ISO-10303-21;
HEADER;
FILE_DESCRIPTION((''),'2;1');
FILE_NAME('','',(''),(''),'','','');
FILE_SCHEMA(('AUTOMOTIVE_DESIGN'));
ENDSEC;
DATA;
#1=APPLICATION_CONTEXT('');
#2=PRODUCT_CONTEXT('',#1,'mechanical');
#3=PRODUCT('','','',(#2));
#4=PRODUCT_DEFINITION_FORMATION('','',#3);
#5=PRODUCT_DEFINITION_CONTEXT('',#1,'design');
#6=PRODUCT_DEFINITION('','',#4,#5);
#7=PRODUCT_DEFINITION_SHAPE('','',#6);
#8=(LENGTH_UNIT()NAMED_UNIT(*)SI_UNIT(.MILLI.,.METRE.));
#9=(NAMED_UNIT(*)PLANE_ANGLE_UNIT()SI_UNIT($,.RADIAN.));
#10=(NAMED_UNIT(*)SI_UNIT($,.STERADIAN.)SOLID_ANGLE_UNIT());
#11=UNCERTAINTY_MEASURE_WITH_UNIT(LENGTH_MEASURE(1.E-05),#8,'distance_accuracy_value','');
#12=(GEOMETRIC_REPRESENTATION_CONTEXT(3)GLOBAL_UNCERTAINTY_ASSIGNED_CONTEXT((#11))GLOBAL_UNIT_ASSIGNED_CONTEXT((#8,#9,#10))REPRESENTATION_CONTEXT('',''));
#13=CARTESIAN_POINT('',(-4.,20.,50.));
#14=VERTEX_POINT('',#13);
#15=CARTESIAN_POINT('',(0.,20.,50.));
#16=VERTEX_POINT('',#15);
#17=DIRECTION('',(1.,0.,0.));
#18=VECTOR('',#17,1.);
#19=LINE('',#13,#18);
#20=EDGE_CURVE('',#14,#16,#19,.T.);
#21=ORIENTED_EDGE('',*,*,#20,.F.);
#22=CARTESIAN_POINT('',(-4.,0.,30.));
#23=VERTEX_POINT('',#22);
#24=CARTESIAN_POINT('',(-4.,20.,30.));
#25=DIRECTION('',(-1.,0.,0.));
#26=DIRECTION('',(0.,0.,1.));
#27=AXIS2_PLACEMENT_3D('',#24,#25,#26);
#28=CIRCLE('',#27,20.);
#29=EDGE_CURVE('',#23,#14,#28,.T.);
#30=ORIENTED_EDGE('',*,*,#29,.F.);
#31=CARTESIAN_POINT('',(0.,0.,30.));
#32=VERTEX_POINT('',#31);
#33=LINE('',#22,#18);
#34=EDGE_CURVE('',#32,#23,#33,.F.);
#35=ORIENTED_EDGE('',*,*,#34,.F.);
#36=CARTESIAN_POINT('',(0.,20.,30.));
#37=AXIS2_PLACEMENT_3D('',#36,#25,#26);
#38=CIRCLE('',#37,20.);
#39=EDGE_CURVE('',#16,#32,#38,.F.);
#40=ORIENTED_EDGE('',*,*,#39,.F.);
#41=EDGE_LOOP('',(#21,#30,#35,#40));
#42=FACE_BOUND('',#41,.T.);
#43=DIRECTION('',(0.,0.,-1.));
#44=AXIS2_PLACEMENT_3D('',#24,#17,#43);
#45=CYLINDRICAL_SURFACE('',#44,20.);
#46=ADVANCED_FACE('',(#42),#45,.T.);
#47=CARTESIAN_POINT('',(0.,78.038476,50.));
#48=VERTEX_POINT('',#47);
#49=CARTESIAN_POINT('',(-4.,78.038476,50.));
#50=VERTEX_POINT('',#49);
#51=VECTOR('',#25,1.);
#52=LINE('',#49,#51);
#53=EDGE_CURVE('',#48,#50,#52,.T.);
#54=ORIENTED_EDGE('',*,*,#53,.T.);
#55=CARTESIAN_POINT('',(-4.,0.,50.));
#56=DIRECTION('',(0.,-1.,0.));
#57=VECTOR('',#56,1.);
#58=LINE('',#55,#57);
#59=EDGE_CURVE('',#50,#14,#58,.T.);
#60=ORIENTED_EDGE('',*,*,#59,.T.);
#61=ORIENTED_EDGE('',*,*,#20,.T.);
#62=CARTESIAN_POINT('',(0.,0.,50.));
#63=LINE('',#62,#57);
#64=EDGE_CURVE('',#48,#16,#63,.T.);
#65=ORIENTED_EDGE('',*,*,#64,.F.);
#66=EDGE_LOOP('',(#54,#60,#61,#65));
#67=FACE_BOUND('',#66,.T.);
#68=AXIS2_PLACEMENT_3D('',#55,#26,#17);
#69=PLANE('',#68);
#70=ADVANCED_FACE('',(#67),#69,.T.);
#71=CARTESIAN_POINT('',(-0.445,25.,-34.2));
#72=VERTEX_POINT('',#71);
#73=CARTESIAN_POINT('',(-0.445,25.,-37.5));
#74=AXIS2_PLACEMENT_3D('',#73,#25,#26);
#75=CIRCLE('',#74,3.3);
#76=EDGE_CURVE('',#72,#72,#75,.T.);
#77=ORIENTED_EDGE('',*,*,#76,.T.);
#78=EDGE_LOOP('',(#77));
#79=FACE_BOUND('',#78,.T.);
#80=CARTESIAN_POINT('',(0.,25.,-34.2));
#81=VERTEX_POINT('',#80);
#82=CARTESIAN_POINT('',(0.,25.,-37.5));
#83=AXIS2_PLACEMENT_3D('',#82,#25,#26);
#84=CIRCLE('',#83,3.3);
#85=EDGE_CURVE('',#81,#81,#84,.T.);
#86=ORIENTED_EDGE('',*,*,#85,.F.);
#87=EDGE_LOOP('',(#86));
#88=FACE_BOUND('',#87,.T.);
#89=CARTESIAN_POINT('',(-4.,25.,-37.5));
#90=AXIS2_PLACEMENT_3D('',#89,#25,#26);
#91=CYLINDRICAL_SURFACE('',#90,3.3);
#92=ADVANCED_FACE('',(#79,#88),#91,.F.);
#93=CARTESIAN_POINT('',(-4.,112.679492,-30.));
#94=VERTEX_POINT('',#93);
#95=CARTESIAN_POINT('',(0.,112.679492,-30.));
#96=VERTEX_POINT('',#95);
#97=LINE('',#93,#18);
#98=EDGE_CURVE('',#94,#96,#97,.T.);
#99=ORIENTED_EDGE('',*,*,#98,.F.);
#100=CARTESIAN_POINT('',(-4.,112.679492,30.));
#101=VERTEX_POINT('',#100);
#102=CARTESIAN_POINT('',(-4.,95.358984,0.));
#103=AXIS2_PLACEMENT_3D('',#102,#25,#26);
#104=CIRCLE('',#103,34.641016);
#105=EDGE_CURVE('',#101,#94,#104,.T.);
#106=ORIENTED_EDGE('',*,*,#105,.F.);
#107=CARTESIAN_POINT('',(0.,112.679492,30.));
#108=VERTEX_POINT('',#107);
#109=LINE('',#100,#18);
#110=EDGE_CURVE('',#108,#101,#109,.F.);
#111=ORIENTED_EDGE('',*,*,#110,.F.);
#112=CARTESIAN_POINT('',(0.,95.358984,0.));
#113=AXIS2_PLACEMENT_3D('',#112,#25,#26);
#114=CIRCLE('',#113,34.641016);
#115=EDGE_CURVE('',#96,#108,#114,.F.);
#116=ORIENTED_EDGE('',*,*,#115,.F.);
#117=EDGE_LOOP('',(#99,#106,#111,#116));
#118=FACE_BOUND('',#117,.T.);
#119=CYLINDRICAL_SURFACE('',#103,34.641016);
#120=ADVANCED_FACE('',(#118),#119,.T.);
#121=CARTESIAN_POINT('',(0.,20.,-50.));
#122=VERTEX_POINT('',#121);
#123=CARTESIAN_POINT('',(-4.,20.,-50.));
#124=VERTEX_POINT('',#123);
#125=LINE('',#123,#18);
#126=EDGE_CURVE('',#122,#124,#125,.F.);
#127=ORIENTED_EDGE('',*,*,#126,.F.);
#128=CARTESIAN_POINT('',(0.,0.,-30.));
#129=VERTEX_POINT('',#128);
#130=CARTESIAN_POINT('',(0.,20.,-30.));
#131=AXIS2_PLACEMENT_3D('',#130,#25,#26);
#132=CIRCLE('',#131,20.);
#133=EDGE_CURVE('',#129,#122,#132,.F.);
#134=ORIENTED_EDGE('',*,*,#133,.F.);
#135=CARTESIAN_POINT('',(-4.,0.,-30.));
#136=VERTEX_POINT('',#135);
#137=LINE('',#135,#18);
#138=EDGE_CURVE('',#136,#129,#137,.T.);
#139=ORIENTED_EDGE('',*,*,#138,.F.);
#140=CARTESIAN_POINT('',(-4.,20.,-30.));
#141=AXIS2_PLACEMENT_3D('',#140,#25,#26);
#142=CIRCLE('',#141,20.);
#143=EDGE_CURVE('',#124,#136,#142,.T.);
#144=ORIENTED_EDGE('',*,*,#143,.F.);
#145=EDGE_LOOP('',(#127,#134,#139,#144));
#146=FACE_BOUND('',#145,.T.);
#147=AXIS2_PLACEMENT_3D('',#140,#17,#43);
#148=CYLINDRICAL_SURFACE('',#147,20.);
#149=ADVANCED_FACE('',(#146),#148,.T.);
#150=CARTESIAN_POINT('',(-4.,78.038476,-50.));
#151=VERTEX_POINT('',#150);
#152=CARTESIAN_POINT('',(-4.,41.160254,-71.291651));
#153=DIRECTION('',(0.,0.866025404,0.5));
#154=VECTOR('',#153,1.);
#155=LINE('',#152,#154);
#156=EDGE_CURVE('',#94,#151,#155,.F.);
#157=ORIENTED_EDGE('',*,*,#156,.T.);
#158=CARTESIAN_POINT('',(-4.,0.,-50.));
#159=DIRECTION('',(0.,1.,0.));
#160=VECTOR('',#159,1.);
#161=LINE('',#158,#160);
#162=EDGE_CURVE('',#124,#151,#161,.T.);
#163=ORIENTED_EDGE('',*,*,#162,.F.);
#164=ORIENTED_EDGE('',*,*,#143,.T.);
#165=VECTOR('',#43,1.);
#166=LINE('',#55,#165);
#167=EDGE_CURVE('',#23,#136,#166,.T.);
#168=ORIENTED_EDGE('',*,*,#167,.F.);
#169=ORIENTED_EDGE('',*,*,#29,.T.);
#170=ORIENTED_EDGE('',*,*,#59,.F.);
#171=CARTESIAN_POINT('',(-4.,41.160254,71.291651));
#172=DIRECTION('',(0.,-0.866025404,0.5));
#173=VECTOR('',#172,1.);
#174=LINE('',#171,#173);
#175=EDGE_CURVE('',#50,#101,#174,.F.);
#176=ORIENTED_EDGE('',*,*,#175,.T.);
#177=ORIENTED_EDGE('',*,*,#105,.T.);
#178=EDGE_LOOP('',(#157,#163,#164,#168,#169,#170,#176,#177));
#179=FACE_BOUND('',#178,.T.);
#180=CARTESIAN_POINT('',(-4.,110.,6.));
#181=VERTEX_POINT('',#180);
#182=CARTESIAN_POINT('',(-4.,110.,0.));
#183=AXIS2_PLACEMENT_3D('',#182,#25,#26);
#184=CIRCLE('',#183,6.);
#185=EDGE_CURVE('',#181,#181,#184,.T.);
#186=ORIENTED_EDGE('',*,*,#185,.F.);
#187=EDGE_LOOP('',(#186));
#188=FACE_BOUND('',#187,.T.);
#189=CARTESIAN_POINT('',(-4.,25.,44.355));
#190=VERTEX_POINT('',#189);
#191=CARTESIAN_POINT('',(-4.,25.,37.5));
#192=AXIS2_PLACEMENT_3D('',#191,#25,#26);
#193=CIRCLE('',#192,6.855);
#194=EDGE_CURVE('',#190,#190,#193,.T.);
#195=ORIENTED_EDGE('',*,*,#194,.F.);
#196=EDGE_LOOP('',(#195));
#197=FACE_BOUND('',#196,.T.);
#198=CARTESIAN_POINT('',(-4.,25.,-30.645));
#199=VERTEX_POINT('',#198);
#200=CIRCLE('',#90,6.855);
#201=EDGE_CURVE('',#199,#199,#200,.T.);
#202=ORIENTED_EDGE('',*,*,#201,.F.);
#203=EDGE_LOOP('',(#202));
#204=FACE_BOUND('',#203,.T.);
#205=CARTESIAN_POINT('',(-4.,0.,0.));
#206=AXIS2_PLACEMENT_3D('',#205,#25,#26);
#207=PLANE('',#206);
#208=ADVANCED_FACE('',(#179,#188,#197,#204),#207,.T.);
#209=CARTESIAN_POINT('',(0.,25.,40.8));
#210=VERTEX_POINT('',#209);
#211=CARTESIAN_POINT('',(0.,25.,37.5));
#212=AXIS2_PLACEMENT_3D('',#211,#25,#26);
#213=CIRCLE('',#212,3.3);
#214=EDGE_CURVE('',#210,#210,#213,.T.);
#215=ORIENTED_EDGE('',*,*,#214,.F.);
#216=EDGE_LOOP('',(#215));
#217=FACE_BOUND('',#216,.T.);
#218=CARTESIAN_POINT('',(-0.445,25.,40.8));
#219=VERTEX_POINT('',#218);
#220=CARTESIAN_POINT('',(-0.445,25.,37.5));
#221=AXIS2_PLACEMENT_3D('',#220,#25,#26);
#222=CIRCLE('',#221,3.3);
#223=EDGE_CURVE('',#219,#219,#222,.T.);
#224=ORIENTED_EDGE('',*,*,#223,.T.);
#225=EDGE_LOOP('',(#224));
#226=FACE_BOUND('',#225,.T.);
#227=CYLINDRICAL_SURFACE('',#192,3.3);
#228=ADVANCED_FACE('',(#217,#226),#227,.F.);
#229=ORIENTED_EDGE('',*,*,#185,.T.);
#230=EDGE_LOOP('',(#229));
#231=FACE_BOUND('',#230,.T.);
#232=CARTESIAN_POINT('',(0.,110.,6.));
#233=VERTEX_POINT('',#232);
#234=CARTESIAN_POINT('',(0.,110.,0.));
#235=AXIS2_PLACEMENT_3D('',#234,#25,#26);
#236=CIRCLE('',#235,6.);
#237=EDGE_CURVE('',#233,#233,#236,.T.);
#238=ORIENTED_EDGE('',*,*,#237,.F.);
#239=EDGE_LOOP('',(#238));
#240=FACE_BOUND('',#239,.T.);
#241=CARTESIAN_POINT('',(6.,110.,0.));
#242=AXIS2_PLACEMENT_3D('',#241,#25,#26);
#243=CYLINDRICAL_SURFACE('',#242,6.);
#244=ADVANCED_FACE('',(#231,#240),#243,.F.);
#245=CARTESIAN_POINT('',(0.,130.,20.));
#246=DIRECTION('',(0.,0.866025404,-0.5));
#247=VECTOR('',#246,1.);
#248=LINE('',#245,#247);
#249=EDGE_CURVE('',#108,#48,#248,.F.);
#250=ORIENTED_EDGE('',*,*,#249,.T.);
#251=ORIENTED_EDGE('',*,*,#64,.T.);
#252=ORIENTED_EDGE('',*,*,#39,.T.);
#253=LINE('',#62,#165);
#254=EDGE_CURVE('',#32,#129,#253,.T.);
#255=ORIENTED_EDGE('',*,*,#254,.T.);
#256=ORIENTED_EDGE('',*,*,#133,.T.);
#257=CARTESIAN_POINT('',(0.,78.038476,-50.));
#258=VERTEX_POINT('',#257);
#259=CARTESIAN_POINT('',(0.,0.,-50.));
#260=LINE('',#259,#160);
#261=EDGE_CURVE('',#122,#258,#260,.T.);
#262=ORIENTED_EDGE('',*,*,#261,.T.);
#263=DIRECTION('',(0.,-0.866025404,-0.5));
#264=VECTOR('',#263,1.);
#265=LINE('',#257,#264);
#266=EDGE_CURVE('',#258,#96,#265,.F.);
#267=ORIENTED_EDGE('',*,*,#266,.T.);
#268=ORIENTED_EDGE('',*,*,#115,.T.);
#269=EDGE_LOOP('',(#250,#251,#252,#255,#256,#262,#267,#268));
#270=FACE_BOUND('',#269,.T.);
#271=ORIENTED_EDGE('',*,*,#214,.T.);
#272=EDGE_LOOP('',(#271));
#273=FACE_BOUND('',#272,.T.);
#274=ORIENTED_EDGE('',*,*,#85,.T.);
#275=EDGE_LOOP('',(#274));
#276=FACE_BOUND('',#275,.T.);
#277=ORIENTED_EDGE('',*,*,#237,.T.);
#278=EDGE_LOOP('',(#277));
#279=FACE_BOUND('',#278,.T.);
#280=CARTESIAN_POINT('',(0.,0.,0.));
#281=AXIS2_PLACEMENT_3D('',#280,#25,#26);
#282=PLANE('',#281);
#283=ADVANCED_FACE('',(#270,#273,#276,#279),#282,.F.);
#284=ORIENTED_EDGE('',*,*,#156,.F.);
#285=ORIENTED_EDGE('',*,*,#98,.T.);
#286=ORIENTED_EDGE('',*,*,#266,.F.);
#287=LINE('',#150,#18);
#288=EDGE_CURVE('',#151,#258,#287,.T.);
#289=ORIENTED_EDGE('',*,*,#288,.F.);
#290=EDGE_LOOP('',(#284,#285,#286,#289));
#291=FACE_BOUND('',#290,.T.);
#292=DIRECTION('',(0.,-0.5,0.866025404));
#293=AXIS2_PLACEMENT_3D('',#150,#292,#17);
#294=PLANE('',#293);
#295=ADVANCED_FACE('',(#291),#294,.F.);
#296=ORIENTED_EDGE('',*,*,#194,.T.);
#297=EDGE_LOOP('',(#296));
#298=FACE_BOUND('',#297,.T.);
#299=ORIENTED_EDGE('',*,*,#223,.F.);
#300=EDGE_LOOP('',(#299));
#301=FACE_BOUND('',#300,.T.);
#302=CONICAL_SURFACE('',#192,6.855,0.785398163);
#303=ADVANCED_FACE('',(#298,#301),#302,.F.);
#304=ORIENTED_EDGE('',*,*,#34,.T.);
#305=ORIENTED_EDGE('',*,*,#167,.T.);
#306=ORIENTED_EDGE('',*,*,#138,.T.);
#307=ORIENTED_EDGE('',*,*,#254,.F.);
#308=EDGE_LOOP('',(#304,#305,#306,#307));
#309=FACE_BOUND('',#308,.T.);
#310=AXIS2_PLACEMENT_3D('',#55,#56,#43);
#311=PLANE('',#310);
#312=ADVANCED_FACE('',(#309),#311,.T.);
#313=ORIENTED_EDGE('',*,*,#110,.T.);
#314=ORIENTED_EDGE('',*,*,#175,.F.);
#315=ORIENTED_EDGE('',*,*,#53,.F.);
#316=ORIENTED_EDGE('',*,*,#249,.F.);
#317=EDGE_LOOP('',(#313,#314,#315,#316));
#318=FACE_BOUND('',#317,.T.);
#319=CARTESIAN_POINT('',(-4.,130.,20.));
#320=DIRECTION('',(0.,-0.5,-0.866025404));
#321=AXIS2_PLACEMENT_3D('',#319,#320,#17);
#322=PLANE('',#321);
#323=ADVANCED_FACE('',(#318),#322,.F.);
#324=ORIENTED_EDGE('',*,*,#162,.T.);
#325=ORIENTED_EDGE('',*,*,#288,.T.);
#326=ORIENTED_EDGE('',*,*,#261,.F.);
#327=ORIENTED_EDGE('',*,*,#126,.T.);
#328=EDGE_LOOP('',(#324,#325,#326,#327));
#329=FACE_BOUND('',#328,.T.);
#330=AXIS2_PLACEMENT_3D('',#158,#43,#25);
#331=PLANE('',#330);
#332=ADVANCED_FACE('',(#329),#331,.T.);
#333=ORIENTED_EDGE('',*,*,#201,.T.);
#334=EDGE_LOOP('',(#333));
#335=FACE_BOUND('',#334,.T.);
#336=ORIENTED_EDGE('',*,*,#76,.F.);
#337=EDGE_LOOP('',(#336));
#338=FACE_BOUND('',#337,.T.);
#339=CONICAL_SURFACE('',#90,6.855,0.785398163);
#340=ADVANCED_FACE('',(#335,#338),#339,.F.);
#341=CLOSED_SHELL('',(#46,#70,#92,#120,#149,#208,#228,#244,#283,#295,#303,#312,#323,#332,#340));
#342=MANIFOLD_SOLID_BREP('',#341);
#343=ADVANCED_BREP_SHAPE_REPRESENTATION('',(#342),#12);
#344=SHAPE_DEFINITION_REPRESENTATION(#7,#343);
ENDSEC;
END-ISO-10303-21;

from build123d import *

# Parameters (mm, degrees)
SKETCH_10_W                = 100
SKETCH_10_H                = 130
SM_BASE_FLANGE_1_DEPTH     = 4
SKETCH_13_R                = 6
CUT_EXTRUDE_1_DEPTH        = 10
HOLE_WIZARD_M61_AT_2_COUNT = 2
HOLE_WIZARD_M61_AT_2_PITCH = 75
CHAMFER_1_SIZE             = 30
CHAMFER_1_SIZE2            = 51.961524227
FILLET_1_R                 = 34.641016
FILLET_2_R                 = 20


# Sheet-metal steps are written as plain solids
with BuildPart() as part:
    # Эскиз10 → Базовая кромка1 (new body)
    with BuildSketch(Plane(origin=(0, 0, 0), x_dir=(0, 0, -1), z_dir=(1, 0, 0))):
        with Locations((0, 65)):
            Rectangle(SKETCH_10_W, SKETCH_10_H)
    extrude(amount=-SM_BASE_FLANGE_1_DEPTH)

    # Эскиз13 → Вырез-Вытянуть1 (cut)
    with BuildSketch(Plane.ZY.offset(4)):
        with Locations((0, 110)):
            Circle(SKETCH_13_R)
    extrude(amount=-CUT_EXTRUDE_1_DEPTH, mode=Mode.SUBTRACT)

    # Эскиз16 → Зенковка для винта с потайной головкой и внутренним шестигранником M61 (revolve, cut)
    with BuildSketch(Plane(origin=(-4, 25, -37.5), x_dir=(0, 0, 1), z_dir=(0, 1, 0))):
        Polygon((0, 0), (0, 4), (3.3, 4), (3.3, 3.555), (6.855, 0), align=None)
    hole_wizard_m61 = revolve(axis=Axis((-10.35, 25, -37.5), (1, 0, 0)), mode=Mode.SUBTRACT)

    # Зенковка для винта с потайной головкой и внутренним шестигранником M61 at 2: Зенковка для винта с потайной головкой и внутренним шестигранником M61 ×2
    with Locations(*[(0, 0, i * HOLE_WIZARD_M61_AT_2_PITCH) for i in range(1, HOLE_WIZARD_M61_AT_2_COUNT)]):
        add(hole_wizard_m61, mode=Mode.SUBTRACT)

    # Фаска1
    chamfer_1_edges = [part.edges().sort_by_distance(p)[0] for p in [
        (-2, 130, 50),
        (-2, 130, -50),
    ]]
    chamfer_1_side = [part.faces().sort_by_distance(p)[0] for p in [
        (-2, 130, 0),
    ]]
    chamfer(chamfer_1_edges, length=CHAMFER_1_SIZE, length2=CHAMFER_1_SIZE2, reference=chamfer_1_side[0])

    # Скругление1
    fillet_1_edges = [part.edges().sort_by_distance(p)[0] for p in [
        (-2, 130, -20),
        (-2, 130, 20),
    ]]
    fillet(fillet_1_edges, radius=FILLET_1_R)

    # Скругление2
    fillet_2_edges = [part.edges().sort_by_distance(p)[0] for p in [
        (-2, 0, -50),
        (-2, 0, 50),
    ]]
    fillet(fillet_2_edges, radius=FILLET_2_R)


solid = part.part
